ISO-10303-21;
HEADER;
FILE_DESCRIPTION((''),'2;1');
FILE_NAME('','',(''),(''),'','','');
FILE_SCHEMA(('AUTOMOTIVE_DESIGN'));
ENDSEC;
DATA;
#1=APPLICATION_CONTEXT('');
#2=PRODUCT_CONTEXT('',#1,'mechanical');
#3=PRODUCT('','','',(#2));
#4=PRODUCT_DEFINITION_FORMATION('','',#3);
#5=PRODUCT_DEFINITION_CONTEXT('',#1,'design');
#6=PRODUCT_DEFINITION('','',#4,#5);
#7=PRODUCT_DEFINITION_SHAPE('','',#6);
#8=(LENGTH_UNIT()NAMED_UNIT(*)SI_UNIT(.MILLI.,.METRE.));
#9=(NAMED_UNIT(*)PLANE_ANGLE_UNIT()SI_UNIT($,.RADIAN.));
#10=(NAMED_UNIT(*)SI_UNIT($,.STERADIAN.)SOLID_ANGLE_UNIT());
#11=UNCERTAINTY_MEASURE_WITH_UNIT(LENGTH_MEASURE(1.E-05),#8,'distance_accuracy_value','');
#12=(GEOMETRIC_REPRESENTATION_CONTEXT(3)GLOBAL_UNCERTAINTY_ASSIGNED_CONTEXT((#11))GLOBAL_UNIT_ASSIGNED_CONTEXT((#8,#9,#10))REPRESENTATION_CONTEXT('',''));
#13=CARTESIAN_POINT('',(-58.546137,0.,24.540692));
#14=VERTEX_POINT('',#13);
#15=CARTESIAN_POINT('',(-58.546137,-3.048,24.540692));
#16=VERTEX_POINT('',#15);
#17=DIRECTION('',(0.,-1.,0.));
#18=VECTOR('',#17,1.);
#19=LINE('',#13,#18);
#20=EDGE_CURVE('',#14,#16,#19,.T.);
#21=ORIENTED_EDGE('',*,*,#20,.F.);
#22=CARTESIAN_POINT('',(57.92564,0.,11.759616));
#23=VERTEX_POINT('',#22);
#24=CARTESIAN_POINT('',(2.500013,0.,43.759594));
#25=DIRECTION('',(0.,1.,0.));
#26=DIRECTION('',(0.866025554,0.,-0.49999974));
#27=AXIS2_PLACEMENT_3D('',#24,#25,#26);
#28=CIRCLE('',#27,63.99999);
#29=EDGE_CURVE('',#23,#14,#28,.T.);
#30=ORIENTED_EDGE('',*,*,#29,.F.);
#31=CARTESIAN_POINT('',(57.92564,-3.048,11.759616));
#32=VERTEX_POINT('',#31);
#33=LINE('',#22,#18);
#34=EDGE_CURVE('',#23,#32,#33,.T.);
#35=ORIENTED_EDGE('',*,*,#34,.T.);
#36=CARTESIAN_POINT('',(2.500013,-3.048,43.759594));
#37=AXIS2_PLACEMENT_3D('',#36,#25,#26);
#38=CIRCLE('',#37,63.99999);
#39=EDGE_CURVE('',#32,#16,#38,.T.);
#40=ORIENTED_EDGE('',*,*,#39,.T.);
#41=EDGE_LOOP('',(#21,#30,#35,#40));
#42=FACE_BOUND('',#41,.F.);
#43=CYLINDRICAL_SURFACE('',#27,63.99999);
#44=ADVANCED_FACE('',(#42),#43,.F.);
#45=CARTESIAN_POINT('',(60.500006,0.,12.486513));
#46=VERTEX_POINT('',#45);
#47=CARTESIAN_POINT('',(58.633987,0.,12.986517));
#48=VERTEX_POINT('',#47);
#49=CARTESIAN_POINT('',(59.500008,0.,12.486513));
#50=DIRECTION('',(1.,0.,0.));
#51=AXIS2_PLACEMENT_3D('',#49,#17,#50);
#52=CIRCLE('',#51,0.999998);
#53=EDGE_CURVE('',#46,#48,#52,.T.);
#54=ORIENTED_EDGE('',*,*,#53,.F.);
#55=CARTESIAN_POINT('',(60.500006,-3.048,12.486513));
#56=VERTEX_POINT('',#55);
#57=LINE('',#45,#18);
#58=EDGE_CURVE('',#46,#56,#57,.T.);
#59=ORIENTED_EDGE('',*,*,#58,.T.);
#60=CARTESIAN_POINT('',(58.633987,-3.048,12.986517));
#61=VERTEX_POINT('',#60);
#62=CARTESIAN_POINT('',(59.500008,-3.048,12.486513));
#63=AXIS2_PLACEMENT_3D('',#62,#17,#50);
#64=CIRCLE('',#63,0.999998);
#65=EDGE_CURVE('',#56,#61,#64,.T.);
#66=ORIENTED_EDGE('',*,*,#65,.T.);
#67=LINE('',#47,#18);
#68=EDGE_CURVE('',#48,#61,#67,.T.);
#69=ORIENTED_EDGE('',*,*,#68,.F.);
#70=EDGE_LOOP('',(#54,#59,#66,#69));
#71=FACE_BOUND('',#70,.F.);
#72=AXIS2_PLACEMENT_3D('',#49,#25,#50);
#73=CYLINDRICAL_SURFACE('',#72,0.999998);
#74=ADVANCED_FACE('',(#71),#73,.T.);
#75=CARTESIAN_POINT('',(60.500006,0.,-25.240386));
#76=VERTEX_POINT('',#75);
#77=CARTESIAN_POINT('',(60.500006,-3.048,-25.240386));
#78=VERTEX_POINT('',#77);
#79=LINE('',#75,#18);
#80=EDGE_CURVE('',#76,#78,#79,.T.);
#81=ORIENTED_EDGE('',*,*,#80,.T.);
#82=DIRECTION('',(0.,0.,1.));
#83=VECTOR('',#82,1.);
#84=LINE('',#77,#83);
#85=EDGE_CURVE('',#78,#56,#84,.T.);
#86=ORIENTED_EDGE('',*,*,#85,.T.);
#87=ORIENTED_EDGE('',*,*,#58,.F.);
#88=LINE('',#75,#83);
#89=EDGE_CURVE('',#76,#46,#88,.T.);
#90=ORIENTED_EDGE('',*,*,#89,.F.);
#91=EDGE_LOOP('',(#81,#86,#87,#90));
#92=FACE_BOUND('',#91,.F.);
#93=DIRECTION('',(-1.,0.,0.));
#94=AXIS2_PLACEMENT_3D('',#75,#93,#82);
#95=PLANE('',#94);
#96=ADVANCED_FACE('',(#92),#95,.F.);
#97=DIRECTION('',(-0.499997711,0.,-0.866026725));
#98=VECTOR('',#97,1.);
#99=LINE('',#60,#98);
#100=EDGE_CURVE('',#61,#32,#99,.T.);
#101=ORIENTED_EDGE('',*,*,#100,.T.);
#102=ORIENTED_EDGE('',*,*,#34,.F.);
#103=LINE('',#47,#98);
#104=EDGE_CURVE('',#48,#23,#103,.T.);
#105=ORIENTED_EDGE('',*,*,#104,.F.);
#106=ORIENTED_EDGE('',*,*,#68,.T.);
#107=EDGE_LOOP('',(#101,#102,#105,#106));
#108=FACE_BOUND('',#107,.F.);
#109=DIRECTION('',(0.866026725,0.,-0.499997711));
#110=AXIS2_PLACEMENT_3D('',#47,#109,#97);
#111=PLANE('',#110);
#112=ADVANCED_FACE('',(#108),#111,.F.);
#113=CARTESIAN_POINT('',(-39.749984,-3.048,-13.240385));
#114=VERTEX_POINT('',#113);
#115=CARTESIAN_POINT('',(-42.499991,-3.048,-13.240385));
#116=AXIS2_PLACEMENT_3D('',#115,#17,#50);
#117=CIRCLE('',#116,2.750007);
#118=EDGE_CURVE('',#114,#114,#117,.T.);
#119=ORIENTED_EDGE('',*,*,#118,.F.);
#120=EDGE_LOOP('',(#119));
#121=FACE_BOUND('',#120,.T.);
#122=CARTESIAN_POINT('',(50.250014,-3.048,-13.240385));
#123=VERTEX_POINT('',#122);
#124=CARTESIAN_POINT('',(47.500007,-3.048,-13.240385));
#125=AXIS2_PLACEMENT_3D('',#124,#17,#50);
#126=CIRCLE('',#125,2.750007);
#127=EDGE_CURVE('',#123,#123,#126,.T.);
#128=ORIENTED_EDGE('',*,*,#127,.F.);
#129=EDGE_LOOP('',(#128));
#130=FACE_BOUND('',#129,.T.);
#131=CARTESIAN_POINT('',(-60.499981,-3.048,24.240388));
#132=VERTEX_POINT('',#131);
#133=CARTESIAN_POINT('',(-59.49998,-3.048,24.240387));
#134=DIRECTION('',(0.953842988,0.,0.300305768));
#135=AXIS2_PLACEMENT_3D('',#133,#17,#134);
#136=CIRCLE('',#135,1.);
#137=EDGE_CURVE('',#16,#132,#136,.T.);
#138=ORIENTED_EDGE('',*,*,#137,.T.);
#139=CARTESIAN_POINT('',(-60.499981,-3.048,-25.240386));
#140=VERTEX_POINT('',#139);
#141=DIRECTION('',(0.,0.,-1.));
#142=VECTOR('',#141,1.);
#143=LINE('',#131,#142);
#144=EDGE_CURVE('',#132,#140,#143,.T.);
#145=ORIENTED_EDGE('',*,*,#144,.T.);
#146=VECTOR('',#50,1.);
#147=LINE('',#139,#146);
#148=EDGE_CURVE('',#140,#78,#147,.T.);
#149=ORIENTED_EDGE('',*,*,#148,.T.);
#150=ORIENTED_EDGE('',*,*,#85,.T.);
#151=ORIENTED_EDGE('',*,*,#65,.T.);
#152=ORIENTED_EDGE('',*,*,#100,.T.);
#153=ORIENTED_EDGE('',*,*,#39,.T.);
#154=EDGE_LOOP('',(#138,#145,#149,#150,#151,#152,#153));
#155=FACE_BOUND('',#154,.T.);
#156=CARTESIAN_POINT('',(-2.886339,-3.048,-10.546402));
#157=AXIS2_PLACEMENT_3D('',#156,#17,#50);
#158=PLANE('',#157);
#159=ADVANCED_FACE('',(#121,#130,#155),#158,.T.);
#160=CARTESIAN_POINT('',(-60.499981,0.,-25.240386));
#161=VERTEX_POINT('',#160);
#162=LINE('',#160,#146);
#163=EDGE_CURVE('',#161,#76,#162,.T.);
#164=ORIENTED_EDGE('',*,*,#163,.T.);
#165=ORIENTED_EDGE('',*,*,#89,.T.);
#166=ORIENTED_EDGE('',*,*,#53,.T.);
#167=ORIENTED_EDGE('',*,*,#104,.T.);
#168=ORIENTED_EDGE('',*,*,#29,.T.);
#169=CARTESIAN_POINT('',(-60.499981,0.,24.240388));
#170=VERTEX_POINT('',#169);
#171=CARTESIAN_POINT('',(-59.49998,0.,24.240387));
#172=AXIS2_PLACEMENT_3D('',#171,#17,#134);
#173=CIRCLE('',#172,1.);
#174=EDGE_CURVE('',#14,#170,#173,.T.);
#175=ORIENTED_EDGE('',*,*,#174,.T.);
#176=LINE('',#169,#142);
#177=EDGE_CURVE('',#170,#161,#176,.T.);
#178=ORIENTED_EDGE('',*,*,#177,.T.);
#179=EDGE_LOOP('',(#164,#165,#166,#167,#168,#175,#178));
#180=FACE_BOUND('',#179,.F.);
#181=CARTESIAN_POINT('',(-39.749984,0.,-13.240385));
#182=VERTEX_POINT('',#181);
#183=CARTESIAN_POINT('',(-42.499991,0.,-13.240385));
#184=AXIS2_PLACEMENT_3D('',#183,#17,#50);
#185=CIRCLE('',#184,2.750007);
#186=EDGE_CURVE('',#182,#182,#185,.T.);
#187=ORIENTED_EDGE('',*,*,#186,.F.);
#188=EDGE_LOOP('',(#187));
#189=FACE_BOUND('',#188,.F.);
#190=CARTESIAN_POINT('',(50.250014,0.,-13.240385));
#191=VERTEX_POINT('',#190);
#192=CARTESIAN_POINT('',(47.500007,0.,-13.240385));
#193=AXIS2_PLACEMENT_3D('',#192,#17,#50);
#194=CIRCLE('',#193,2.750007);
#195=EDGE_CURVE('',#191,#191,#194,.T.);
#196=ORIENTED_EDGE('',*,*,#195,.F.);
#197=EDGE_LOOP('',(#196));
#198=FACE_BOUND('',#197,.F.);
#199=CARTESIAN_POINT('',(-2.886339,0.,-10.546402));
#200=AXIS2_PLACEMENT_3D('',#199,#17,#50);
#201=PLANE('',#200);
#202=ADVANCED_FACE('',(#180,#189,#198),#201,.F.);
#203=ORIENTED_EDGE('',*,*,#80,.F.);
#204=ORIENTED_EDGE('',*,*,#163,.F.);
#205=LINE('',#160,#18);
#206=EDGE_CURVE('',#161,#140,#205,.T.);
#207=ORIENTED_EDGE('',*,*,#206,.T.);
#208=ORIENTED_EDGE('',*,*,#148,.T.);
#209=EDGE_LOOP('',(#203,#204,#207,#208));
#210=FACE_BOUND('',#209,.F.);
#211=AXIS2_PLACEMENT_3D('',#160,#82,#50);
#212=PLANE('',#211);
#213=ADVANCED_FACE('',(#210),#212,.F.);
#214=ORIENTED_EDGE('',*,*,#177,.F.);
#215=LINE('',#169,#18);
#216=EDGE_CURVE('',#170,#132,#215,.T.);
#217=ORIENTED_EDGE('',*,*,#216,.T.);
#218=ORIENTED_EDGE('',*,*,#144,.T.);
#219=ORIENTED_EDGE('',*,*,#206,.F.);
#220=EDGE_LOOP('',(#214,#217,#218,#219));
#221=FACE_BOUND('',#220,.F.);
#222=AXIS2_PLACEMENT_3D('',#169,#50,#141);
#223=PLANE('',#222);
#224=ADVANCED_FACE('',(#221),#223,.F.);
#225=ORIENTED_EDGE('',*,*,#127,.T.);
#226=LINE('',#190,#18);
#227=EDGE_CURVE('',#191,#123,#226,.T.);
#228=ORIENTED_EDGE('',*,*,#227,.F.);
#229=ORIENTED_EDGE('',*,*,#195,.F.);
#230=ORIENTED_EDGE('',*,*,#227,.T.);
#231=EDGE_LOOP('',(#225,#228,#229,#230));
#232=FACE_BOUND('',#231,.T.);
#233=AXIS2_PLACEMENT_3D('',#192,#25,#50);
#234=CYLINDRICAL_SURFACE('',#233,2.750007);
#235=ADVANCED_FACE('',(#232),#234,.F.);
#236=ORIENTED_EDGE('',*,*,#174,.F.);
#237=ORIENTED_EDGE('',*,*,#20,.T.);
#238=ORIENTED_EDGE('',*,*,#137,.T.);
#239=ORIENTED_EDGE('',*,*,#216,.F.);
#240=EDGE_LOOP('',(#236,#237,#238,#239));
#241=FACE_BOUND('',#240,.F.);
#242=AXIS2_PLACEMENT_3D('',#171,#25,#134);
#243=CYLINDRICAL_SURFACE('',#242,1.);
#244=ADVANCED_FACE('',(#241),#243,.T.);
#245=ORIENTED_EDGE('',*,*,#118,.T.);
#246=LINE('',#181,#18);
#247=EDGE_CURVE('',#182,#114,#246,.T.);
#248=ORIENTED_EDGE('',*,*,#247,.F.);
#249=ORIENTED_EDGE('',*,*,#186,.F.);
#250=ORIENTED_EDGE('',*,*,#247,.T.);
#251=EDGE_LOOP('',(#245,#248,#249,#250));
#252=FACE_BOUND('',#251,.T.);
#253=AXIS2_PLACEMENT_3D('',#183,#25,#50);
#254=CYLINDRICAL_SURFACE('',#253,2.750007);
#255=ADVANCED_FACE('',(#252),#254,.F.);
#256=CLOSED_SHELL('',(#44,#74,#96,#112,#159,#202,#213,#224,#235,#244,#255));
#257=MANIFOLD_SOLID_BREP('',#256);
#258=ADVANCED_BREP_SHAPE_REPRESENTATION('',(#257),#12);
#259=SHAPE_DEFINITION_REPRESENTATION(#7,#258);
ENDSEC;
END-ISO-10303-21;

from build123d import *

# Parameters (mm, degrees)
F0_R     = 2.7500072
F1_DEPTH = 3.048


# Not quite as in the source:
# - ends of sketch curves that miss each other by under 0.0002 mm in the source are joined


with BuildPart() as f1:
    # F0 (on Front) → F1 (new body)
    with BuildSketch(Plane.XZ):
        with BuildLine():
            ThreePointArc((60.500006, 12.486513), (59.7588291045, 13.4524362039), (58.6339869962, 12.986516621))
            Line((58.6339869962, 12.986516621), (57.9256398, 11.7596158))
            ThreePointArc((57.9256398, 11.7596158), (-4.481139989, -19.8585023044), (-58.5461372224, 24.5406923411))
            ThreePointArc((-58.5461372224, 24.5406923411), (-59.6518971954, 25.2287800004), (-60.4999806, 24.2403884))
            Line((-60.4999806, 24.2403884), (-60.4999806, -25.2403864))
            Line((-60.4999806, -25.2403864), (60.500006, -25.2403864))
            Line((60.500006, -25.2403864), (60.500006, 12.486513))
        make_face()
        with Locations((-42.4999912, -13.240385)):
            Circle(F0_R, mode=Mode.SUBTRACT)
        with Locations((47.5000066, -13.240385)):
            Circle(F0_R, mode=Mode.SUBTRACT)
    extrude(amount=F1_DEPTH)


solid = f1.part
